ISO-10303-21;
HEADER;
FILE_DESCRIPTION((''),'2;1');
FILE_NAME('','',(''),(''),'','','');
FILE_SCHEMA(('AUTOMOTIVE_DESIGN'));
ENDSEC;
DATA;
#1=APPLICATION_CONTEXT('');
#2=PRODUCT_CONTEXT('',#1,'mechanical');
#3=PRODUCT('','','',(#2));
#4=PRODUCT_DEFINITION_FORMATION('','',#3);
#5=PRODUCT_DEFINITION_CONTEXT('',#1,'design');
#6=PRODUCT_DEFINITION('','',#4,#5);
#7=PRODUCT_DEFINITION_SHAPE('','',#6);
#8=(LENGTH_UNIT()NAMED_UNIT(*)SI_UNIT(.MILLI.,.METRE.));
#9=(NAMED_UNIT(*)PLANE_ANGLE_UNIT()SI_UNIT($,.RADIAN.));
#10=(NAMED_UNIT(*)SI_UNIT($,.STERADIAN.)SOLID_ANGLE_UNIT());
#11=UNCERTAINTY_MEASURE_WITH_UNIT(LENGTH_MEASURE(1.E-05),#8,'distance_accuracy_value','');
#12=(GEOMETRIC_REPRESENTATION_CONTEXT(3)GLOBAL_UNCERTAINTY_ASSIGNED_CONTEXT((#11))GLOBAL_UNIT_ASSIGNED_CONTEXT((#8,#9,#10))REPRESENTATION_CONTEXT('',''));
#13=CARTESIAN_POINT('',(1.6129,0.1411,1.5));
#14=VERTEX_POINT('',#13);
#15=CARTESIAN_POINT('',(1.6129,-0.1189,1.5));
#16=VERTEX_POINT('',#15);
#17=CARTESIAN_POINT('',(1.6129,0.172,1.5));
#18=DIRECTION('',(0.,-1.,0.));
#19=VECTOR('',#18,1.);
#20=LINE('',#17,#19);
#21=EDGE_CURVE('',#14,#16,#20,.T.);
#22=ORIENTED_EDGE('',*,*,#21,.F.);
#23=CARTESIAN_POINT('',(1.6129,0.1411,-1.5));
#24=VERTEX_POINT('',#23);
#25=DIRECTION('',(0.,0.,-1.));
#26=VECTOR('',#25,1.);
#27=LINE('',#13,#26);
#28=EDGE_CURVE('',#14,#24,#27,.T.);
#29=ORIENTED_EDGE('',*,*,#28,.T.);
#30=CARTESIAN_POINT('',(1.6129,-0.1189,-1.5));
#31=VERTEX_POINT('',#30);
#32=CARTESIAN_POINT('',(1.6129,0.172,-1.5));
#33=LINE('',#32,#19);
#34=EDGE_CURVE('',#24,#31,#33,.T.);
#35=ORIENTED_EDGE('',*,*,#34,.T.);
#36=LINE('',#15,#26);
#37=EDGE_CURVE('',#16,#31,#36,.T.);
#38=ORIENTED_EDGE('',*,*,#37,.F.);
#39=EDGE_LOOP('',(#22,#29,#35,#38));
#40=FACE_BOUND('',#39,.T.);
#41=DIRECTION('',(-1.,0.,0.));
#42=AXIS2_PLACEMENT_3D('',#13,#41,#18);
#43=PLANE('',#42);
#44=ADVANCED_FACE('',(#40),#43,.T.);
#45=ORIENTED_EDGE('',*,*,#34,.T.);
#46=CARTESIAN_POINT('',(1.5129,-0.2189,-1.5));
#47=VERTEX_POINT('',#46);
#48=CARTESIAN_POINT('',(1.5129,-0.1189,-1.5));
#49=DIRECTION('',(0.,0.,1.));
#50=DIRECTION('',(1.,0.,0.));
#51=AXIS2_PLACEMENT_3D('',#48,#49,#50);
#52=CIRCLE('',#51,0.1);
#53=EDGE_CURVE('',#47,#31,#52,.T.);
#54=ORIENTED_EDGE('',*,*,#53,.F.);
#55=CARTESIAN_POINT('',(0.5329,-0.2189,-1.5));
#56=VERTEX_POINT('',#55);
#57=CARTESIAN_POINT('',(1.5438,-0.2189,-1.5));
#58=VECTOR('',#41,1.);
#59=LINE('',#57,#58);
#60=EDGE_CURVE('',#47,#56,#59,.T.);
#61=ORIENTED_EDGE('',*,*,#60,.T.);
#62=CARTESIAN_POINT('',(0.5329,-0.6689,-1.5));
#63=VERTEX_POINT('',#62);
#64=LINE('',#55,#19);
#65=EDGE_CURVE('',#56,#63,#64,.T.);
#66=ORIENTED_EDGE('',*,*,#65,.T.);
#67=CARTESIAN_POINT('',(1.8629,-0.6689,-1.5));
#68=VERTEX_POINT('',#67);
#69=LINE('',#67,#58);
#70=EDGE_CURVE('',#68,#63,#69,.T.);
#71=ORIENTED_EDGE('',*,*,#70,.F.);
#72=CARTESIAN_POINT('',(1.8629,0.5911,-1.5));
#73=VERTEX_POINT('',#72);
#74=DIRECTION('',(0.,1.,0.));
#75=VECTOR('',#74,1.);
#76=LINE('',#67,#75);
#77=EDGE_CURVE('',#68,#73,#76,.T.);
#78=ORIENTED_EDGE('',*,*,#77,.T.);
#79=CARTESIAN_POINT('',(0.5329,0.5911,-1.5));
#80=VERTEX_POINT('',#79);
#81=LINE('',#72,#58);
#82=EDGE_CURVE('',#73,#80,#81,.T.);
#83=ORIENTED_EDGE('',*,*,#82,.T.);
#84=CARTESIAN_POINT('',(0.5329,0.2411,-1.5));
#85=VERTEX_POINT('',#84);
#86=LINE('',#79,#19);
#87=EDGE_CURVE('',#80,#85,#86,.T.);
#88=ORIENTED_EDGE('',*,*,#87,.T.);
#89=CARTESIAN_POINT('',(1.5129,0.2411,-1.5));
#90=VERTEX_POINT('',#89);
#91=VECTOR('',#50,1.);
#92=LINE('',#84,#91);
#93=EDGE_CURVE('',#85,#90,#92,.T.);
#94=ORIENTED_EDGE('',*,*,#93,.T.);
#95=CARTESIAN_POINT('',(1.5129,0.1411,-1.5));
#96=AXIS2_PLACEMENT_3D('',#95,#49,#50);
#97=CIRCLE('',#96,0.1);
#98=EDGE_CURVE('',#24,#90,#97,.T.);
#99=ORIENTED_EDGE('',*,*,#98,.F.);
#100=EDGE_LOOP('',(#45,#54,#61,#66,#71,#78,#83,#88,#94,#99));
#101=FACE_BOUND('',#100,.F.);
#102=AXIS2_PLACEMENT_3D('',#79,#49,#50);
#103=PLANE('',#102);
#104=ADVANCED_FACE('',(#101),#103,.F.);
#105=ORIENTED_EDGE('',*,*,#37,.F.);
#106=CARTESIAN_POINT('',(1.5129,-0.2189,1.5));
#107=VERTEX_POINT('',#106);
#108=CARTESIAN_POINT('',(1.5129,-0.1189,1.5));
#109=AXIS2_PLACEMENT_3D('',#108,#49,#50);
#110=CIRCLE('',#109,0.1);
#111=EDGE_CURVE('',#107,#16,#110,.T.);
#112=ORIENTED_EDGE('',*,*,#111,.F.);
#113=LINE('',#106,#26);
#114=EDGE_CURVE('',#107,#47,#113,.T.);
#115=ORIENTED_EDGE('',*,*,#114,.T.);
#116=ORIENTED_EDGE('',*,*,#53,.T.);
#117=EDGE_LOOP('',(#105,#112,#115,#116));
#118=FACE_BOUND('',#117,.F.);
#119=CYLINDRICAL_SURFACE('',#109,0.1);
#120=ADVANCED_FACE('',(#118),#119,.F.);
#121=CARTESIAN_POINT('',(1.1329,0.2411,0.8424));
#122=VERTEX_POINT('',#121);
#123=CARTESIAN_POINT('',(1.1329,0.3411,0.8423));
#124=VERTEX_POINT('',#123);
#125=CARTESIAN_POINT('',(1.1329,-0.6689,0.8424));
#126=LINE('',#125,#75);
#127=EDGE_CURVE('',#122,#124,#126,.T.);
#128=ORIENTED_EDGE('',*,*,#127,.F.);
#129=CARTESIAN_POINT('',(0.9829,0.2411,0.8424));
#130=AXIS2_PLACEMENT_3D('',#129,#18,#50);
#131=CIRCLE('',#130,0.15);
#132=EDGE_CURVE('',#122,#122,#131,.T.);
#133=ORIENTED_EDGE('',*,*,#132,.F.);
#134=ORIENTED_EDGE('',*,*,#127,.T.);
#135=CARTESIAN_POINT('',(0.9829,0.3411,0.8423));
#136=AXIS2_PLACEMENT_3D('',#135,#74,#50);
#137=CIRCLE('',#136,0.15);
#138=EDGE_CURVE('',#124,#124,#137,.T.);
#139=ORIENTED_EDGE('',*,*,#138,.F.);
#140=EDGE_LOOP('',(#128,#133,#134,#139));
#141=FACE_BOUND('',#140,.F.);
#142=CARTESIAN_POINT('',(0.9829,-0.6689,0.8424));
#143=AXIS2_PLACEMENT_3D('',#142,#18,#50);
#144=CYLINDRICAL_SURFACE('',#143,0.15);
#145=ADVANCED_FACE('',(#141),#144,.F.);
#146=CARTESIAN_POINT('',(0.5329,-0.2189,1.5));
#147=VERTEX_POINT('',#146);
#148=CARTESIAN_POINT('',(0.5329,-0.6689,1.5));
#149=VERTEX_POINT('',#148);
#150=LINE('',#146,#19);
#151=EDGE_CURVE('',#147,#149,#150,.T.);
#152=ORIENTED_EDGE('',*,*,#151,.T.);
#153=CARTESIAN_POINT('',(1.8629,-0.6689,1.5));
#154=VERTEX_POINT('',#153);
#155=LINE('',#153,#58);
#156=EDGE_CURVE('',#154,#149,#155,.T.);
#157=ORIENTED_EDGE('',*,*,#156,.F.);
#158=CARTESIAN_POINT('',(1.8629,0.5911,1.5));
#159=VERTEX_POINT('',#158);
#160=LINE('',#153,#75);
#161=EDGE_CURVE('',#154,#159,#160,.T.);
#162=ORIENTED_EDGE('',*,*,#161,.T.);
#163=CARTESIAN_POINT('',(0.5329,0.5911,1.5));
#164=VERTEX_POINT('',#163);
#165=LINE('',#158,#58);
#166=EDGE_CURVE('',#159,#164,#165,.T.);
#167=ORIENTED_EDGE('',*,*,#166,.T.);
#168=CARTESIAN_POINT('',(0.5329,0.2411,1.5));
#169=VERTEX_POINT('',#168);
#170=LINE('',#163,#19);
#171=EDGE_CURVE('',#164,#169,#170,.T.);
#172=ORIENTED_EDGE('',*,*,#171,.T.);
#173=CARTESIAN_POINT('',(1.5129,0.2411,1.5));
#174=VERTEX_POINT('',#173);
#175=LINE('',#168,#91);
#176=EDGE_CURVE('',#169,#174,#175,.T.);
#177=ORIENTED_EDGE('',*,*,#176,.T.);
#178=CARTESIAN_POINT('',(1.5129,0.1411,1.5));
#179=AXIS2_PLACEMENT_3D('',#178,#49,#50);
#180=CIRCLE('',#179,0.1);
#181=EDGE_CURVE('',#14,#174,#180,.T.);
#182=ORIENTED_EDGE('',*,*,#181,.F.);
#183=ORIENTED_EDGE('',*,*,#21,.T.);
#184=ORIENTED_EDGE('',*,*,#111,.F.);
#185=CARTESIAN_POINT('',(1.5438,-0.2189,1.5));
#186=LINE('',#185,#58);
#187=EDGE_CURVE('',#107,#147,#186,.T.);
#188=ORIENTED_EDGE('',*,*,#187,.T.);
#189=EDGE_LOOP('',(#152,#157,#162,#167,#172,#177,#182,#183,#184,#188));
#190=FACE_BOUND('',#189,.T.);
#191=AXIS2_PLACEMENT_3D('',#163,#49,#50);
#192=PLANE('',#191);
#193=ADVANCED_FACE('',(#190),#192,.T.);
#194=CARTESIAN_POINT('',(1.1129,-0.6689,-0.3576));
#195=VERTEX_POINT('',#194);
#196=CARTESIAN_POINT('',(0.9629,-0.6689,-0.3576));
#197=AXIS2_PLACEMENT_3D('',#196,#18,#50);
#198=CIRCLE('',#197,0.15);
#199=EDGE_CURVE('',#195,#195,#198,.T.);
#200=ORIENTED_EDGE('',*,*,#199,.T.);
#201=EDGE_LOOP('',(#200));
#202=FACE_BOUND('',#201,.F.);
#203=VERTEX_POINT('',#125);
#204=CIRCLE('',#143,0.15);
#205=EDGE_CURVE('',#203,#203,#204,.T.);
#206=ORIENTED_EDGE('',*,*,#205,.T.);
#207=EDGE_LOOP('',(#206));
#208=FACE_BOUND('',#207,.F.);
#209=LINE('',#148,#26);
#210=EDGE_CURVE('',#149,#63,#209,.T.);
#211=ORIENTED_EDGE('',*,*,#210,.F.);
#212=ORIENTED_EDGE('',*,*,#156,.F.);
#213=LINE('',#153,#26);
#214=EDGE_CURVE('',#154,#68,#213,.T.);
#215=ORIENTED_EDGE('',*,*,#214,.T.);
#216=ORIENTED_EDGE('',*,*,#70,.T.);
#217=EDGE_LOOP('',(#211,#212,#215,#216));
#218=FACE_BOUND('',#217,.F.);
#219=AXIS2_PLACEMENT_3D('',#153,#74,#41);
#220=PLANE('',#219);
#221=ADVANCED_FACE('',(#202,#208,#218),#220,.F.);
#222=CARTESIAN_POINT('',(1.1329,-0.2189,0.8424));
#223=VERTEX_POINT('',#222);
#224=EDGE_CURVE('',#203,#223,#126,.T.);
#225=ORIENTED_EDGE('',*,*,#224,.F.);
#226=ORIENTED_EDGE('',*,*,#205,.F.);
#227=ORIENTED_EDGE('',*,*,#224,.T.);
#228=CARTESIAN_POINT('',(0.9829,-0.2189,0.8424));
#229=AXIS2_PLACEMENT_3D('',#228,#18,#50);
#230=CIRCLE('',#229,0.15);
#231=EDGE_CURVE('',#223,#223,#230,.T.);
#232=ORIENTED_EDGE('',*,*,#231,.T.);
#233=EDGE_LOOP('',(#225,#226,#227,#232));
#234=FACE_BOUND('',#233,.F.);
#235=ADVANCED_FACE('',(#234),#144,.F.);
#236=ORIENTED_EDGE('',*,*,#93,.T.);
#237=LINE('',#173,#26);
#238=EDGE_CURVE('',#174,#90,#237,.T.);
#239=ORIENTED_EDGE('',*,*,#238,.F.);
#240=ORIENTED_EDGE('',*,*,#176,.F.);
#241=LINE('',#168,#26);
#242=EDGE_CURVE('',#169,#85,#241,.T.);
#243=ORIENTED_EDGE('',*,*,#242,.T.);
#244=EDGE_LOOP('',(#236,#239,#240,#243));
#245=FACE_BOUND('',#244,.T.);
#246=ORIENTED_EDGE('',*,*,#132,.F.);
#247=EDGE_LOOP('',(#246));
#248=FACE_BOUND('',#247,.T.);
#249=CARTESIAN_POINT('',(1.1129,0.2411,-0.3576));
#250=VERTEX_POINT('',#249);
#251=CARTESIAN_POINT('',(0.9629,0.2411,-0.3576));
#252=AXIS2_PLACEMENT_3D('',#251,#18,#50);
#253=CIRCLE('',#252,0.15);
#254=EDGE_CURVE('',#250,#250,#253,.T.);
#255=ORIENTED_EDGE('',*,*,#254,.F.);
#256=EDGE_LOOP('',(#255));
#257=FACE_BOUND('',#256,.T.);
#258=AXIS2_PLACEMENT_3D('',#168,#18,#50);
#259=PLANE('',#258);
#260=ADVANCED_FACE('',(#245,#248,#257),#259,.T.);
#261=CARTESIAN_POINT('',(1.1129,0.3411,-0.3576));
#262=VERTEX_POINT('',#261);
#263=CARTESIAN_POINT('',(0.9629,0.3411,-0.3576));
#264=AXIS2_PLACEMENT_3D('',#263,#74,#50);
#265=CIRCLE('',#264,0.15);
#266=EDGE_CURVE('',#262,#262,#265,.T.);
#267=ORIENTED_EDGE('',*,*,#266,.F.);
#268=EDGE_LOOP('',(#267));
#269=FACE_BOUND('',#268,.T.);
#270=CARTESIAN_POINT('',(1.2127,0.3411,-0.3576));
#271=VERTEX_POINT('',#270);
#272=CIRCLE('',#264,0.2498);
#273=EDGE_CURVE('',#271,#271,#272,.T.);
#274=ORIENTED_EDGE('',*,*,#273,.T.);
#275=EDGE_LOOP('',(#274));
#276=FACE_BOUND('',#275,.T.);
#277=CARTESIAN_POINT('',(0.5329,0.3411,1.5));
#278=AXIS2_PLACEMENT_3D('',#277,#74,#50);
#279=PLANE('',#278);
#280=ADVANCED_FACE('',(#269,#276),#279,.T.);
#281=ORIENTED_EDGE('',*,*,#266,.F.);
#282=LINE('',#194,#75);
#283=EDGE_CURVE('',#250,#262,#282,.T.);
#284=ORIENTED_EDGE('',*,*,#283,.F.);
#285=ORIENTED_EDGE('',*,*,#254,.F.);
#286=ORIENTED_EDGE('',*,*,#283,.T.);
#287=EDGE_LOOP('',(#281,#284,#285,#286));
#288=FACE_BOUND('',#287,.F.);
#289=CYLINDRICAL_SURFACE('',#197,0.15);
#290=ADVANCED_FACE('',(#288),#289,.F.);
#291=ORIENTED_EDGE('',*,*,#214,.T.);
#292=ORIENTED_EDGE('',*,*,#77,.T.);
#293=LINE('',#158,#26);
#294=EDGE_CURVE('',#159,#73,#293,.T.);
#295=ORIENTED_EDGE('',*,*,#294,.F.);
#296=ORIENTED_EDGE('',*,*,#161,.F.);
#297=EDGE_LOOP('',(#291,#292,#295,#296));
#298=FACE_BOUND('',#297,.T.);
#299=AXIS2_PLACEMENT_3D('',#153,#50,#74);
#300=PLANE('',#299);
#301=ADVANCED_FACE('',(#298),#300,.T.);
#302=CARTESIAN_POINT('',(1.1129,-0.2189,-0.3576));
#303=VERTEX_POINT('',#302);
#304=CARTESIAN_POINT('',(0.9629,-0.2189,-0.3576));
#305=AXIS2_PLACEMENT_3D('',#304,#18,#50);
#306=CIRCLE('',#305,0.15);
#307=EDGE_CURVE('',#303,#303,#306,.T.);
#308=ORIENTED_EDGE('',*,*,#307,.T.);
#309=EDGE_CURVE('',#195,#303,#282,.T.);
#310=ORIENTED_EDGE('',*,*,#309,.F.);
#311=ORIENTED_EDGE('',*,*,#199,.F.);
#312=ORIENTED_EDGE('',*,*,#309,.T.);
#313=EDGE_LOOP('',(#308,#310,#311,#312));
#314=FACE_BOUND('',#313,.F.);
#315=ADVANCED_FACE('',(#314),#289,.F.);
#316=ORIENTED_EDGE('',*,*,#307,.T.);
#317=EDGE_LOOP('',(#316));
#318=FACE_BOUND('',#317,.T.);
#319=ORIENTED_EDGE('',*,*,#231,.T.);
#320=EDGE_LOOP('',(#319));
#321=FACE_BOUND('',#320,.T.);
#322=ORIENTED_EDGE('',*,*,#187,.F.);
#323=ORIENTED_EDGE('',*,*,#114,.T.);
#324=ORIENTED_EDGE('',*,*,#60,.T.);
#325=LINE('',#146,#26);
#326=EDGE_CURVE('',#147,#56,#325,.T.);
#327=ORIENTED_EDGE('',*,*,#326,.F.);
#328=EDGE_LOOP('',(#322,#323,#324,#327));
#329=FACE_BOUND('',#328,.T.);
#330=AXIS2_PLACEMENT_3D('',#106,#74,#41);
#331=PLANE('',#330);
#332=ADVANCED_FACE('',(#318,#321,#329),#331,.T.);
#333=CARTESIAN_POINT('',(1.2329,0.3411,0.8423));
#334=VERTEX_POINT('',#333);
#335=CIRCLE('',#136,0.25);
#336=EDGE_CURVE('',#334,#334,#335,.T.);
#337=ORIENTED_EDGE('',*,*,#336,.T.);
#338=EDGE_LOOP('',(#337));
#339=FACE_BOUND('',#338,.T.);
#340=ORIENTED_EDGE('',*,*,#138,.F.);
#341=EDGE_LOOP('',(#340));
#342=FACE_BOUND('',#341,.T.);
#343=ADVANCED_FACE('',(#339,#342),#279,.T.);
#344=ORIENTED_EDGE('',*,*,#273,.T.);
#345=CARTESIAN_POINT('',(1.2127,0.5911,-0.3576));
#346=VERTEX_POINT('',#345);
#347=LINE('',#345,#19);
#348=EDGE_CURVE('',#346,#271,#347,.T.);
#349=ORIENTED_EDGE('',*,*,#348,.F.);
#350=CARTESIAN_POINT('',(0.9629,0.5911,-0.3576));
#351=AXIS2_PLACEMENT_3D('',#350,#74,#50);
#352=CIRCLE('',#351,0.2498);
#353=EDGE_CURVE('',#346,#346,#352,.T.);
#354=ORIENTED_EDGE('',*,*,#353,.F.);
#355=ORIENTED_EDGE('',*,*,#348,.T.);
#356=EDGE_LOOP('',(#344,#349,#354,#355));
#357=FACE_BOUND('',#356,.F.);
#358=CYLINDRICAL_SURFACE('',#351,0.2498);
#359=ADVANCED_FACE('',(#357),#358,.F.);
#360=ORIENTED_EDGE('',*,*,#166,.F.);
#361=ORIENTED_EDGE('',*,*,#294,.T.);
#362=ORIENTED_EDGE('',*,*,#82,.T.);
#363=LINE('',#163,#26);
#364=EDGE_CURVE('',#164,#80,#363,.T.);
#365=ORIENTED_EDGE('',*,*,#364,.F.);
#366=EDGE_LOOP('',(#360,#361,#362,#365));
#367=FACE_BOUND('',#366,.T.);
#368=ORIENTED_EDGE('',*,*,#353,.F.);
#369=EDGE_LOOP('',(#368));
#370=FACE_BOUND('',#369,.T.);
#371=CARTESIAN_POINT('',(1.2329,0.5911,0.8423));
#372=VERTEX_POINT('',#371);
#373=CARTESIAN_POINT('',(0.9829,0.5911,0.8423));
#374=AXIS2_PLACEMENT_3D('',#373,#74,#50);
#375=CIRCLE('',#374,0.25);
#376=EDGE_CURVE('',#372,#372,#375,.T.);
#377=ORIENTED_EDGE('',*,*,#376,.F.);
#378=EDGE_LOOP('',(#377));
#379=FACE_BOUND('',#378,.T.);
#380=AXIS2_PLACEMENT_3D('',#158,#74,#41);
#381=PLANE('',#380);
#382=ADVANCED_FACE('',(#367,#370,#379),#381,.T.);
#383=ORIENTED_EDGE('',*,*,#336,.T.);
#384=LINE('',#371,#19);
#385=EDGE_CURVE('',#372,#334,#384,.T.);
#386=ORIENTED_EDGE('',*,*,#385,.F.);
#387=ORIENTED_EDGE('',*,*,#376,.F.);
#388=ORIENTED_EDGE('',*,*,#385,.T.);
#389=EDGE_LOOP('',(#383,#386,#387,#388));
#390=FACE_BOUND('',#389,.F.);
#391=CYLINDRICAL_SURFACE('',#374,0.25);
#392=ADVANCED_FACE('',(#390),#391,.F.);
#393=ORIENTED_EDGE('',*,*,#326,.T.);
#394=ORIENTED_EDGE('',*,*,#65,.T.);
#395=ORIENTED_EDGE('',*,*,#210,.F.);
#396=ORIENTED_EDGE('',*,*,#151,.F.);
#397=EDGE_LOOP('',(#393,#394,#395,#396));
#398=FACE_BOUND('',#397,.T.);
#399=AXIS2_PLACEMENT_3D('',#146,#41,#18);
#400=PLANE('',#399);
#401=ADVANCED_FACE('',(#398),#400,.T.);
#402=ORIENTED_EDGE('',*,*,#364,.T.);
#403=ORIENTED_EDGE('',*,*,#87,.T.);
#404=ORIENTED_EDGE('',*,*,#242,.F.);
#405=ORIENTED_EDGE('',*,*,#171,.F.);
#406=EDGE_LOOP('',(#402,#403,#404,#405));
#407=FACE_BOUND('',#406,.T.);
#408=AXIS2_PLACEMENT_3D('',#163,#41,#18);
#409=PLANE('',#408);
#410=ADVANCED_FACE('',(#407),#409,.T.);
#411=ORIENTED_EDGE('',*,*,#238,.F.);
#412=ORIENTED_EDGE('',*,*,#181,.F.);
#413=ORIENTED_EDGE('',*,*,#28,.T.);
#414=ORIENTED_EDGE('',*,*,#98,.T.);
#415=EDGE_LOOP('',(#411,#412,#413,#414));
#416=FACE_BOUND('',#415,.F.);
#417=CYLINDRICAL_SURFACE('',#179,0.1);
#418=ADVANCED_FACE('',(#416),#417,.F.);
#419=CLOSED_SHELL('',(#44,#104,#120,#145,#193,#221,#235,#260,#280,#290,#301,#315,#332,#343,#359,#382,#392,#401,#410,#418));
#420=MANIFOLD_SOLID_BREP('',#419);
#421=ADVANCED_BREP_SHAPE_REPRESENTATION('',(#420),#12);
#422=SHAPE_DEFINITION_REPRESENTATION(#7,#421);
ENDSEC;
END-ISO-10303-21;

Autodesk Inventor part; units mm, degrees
ref_plane "YZ Plane" through (0, 0, 0) normal (1, 0, 0) x (0, 1, 0)
ref_plane "XZ Plane" through (0, 0, 0) normal (0, 1, 0) x (-1, 0, 0)
sketch "Skizze1" plane through (1.1129, -0.6689, -0.3576) normal (0, -1, 0) x (1, 0, 0)
  line L0 (0.75, -1.1424) -> (0.75, 1.8576) projected
  line L1 (0.75, 1.8576) -> (-0.58, 1.8576) projected
  line L2 (-0.58, 1.8576) -> (-0.58, -1.1424) projected
  line L3 (-0.58, -1.1424) -> (0.75, -1.1424) projected
  line L4 (0.75, 1.8576) -> (-0.58, 1.8576)
  line L5 (-0.58, 1.8576) -> (-0.58, -1.1424)
  line L6 (-0.58, -1.1424) -> (0.75, -1.1424)
  line L7 (0.75, -1.1424) -> (0.75, 1.8576)
  circle A0 centre (-0.15, 0) radius 0.25 projected
  circle A1 centre (-0.15, 0) radius 0.15 projected
  circle A2 centre (-0.13, 1.2) radius 0.15 projected
  circle A3 centre (-0.13, 1.2) radius 0.25 projected
  point P0 (-1.1129, 0.3576)
sketch "Skizze2" plane through (0.5329, 0.5911, 1.5) normal (0, 0, 1) x (1, 0, 0)
  line L0 (0, -0.35) -> (1.0109, -0.35) projected
  circle A0 centre (0.98, -0.45) radius 0.1 projected
  line L1 (1.08, -0.4191) -> (1.08, -0.7409) projected
  circle A1 centre (0.98, -0.71) radius 0.1 projected
  line L2 (1.0109, -0.81) -> (0, -0.81) projected
  line L3 (1.33, -1.26) -> (1.33, 0) projected
  line L4 (1.33, 0) -> (0, 0) projected
  line L5 (1.33, -1.26) -> (0, -1.26) projected
  line L6 (0, -0.81) -> (0, -1.26) projected
  line L7 (0, 0) -> (0, -0.35) projected
  point P0 (-0.5329, -0.5911)
  point P1 (0.9799, -0.35)
  point P2 (1.08, -0.4499)
  point P3 (1.08, -0.7099)
  point P4 (0.9799, -0.81)
ref_plane "Arbeitsebene2" through (1.6129, -0.1189, -1.5) normal (0, 0, -1) x (-1, 0, 0)
extrude "Extrusion1" add sketch "Skizze2" against normal up to surface (3 mm away) contours L7 L4 L3 L5 L6 L2 A1 L1 A0 L0
extrude "Extrusion2" cut sketch "Skizze1" against normal blind 10 contours A1 | A2
sketch "Skizze3" plane through (0.5329, 0.5911, 1.5) normal (0, 1, 0) x (1, 0, 0)
  circle A0 centre (0.43, 1.8576) radius 0.15 projected
  circle A1 centre (0.45, 0.6577) radius 0.15 projected
  circle A2 centre (0.43, 1.8576) radius 0.2498
  circle A3 centre (0.45, 0.6577) radius 0.25
  point P0 (-0.5329, 1.5)
  dimension "d6" = 0.5
extrude "Extrusion3" cut sketch "Skizze3" against normal blind 0.25
properties part number "GlassesInterface"
